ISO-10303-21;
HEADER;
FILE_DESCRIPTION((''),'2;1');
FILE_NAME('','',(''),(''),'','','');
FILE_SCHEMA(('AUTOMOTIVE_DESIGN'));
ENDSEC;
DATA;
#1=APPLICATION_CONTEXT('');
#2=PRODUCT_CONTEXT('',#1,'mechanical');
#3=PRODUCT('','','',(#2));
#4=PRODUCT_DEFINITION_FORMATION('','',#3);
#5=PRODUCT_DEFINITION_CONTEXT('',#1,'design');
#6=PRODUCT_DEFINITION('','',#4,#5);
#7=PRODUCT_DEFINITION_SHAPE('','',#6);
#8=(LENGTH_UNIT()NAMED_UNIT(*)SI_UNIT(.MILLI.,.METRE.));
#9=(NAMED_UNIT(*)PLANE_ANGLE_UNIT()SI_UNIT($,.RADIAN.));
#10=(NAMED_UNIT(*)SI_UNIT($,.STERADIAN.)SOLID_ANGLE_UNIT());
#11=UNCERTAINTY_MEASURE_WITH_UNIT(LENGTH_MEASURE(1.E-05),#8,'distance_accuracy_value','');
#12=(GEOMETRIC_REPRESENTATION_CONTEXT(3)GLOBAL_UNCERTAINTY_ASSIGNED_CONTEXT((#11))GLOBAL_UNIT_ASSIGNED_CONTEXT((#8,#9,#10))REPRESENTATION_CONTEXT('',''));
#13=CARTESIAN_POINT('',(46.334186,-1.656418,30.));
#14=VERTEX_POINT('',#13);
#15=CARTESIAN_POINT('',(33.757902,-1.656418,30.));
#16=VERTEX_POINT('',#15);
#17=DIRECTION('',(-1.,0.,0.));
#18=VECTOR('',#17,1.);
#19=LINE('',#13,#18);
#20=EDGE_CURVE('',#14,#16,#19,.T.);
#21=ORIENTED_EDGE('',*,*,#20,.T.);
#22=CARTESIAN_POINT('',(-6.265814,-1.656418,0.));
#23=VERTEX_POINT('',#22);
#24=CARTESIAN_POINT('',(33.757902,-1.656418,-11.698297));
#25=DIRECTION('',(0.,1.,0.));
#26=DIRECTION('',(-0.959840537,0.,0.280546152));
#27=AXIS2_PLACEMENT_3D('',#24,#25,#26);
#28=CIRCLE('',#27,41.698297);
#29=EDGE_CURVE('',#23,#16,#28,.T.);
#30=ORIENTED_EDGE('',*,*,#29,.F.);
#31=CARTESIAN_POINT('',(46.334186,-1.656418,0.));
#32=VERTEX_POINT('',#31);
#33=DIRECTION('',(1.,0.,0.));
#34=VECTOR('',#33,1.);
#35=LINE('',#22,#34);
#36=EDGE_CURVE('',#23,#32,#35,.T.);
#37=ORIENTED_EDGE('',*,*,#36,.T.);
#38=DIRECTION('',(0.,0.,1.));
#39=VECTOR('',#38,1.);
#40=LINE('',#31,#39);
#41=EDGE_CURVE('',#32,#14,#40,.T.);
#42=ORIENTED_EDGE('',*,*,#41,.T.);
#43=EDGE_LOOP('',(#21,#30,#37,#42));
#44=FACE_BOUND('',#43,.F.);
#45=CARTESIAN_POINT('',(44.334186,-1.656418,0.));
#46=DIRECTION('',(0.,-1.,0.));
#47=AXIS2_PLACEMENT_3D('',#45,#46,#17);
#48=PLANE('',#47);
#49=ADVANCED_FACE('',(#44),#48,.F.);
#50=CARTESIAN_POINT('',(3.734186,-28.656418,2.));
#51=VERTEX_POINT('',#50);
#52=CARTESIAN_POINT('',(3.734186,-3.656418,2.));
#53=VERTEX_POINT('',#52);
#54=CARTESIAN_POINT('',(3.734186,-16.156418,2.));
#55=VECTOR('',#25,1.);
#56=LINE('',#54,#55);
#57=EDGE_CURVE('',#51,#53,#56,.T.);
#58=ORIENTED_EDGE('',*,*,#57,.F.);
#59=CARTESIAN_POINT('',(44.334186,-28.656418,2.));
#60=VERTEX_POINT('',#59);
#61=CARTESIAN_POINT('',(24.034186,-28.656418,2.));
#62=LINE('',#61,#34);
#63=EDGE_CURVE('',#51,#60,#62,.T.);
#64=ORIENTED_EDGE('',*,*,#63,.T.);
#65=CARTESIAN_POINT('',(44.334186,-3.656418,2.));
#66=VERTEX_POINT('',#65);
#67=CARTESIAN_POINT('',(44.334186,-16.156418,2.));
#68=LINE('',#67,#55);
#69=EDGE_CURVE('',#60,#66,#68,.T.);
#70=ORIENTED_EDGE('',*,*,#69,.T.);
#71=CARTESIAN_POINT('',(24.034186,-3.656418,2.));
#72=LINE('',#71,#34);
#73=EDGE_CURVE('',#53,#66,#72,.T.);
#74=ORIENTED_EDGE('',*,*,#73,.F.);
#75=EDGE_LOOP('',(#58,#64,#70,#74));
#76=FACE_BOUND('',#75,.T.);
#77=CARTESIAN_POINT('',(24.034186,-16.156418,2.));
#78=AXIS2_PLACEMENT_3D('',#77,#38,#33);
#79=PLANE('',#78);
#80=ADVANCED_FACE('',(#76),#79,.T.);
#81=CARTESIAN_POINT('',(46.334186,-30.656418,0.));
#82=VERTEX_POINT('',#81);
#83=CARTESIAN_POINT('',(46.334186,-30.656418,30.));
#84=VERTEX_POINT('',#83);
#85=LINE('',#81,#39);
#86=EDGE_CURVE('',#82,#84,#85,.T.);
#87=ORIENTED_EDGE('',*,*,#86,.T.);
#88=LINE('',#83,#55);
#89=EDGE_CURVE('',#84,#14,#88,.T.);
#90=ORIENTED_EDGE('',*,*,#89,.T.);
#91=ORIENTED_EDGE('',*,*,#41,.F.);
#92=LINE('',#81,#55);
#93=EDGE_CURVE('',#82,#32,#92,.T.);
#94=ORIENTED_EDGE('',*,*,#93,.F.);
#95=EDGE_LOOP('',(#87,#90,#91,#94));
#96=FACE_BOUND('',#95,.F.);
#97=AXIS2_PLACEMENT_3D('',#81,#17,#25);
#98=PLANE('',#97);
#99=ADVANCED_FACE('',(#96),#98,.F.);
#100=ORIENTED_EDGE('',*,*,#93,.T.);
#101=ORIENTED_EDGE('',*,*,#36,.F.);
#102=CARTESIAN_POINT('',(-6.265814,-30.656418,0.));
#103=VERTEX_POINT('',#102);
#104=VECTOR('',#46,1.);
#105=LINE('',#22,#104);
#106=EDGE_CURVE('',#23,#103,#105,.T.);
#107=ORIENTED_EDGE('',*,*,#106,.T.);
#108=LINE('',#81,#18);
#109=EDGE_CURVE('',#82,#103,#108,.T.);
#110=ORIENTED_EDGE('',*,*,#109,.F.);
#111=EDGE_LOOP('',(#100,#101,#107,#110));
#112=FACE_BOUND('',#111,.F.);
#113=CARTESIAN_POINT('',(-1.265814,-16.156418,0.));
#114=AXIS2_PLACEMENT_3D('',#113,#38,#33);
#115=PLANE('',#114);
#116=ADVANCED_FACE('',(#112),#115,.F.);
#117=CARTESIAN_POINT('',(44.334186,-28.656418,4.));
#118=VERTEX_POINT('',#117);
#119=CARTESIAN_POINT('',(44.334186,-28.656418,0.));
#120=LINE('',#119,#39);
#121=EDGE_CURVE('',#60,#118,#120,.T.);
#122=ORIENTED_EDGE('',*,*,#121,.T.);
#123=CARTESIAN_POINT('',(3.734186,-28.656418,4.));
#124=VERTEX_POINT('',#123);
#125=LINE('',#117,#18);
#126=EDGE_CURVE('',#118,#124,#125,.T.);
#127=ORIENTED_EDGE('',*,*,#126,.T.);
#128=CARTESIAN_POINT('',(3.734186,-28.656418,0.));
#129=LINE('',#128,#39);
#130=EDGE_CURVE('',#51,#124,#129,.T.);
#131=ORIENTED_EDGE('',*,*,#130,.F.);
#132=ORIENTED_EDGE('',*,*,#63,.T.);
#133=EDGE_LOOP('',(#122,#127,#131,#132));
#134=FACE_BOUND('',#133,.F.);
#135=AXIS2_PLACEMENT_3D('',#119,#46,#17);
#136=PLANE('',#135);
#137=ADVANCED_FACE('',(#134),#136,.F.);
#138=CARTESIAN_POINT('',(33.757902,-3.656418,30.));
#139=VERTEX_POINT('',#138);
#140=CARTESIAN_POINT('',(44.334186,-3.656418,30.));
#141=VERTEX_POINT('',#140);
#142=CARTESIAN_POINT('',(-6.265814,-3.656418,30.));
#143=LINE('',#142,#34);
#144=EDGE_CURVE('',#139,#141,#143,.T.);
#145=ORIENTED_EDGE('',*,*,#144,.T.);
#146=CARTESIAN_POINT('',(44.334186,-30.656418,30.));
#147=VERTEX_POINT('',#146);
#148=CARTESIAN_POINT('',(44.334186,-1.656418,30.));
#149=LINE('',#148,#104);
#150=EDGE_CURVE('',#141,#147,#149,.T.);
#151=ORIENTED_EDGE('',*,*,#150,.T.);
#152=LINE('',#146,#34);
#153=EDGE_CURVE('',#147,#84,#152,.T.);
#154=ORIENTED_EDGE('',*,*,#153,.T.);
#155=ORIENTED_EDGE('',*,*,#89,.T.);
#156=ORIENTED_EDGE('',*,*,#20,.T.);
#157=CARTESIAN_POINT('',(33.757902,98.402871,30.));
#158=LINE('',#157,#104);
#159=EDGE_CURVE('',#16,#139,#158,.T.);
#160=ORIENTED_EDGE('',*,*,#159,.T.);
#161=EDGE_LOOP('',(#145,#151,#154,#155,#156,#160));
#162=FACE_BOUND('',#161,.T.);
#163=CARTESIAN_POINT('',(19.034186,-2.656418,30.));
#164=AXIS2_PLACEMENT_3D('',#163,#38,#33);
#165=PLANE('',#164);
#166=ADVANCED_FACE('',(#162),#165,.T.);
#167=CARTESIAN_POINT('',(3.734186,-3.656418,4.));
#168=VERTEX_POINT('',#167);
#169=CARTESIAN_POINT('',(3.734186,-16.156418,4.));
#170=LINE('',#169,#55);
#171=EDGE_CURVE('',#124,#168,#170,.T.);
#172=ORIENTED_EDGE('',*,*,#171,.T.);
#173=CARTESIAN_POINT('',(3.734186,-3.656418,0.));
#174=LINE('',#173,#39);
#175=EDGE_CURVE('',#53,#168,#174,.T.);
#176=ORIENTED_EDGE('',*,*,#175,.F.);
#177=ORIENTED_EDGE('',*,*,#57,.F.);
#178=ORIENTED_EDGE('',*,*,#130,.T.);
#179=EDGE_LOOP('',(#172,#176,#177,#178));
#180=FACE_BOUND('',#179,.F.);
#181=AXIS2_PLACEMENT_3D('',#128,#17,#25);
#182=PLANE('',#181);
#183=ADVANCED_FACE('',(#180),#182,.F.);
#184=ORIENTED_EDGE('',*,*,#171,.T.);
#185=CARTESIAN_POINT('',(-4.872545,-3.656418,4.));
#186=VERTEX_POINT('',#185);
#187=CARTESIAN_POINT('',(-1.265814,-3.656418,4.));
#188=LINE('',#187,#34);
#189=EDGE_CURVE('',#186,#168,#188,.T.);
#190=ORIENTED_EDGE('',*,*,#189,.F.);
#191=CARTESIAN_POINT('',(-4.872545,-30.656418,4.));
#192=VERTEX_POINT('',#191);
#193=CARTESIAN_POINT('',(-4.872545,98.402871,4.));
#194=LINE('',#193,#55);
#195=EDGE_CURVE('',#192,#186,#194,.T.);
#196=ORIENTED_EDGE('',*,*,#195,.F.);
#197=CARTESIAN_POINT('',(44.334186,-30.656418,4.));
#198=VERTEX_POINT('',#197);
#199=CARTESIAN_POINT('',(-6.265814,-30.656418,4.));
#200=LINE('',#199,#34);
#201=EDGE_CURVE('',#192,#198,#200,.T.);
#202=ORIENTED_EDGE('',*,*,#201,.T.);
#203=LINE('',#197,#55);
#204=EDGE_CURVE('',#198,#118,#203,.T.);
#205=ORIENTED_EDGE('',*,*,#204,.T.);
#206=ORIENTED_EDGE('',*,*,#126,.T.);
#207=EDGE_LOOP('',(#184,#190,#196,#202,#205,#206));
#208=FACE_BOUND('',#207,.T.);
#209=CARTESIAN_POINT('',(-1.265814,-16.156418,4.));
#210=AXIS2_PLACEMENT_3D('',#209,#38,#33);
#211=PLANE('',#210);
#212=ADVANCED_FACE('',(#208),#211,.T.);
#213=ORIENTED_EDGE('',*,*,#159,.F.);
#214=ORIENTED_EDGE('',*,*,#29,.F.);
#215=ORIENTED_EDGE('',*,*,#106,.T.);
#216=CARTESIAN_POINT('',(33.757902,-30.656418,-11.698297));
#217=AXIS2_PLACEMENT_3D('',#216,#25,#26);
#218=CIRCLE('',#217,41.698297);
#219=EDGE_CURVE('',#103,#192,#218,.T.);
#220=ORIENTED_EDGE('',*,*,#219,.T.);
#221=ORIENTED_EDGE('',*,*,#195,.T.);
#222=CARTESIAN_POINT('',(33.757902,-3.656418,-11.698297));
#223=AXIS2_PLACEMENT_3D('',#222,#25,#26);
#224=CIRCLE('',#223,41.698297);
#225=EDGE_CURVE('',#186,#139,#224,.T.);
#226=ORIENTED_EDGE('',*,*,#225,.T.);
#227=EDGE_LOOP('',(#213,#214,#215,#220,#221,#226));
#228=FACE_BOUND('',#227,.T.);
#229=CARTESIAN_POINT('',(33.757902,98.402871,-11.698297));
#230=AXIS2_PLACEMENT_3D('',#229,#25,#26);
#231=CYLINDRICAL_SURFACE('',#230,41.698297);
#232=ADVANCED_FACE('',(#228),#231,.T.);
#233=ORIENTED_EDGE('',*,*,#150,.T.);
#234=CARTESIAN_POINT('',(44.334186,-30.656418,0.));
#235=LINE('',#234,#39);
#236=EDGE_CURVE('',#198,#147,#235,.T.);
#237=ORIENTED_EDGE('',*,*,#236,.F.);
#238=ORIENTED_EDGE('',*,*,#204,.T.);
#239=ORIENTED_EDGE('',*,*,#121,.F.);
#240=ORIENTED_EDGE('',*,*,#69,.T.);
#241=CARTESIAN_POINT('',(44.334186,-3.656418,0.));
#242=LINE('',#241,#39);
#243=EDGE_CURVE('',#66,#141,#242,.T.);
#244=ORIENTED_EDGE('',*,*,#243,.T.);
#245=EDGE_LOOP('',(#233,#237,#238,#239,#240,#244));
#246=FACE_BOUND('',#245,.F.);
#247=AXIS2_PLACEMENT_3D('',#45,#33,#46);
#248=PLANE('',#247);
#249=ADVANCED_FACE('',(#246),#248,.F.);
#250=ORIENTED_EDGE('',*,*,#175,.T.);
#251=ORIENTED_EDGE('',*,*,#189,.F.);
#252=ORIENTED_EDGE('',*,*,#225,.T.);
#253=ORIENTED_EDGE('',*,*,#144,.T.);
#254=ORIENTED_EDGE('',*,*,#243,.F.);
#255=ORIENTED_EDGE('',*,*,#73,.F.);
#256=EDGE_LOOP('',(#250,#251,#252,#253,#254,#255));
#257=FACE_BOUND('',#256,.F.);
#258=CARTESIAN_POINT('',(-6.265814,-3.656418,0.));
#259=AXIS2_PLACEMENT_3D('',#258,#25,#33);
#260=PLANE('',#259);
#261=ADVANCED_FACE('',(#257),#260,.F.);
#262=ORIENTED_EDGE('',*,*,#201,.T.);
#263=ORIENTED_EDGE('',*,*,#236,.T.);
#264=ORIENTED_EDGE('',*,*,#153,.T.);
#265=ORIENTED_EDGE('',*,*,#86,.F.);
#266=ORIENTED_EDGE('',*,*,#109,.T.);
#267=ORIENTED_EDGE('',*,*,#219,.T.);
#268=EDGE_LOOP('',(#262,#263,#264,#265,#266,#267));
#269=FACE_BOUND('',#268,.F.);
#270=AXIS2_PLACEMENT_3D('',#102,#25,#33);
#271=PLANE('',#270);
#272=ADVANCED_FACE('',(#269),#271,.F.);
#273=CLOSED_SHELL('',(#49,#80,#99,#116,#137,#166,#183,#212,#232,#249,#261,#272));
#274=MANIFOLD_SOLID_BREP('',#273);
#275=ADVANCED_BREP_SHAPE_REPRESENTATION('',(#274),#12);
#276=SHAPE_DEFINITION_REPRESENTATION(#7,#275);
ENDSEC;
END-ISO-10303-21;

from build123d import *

# Parameters (mm, degrees)
F0_W        = 40.6
F0_H        = 25
F1_DEPTH    = 2
F2_DEPTH    = 30
F3_DEPTH    = 4
F4_DEPTH    = 30
F0_W_2      = 10
F5_DEPTH    = 4
F6_T1_DEPTH = 202.1185772835


# Not quite as in the source:
# - a fillet or chamfer that OpenCascade refuses, or shapes differently, is made with other operations: its cross-section is extruded or revolved along the edge and cut away or added


with BuildPart() as f1:
    # F0 (on Top) → F1 (new body)
    with BuildSketch(Plane.XY):
        with Locations((24.0341860496, -16.1564178318)):
            Rectangle(F0_W, F0_H)
    extrude(amount=F1_DEPTH)

    # F0 (on Top) → F2 (join)
    with BuildSketch(Plane.XY):
        Polygon((44.3341860496, -1.6564178318), (44.3341860496, -3.6564178318), (44.3341860496, -28.6564178318), (44.3341860496, -30.6564178318), (46.3341860496, -30.6564178318), (46.3341860496, -1.6564178318), align=None)
    extrude(amount=F2_DEPTH)

    # F0 (on Top) → F3 (join)
    with BuildSketch(Plane.XY):
        Polygon((44.3341860496, -28.6564178318), (3.7341860496, -28.6564178318), (-6.2658139504, -28.6564178318), (-6.2658139504, -30.6564178318), (44.3341860496, -30.6564178318), align=None)
    extrude(amount=F3_DEPTH)

    # F0 (on Top) → F4 (join)
    with BuildSketch(Plane.XY):
        Polygon((-6.2658139504, -3.6564178318), (3.7341860496, -3.6564178318), (44.3341860496, -3.6564178318), (44.3341860496, -1.6564178318), (-6.2658139504, -1.6564178318), align=None)
    extrude(amount=F4_DEPTH)

    # F0 (on Top) → F5 (join)
    with BuildSketch(Plane.XY):
        with Locations((-1.2658139504, -16.1564178318)):
            Rectangle(F0_W_2, F0_H)
    extrude(amount=F5_DEPTH)

    # F6: fillet of radius 41.6982966493 on 1 edges, made by hand

    # F6_s2 → F6_t1 (cut)
    with BuildSketch(Plane.XZ.offset(-98.40287081)):
        with BuildLine():
            ThreePointArc((-6.2658139504, 0), (8.7484143116, 21.6674566572), (33.7579015062, 30))
            Line((33.7579015062, 30), (-6.2658139504, 30))
            Line((-6.2658139504, 30), (-6.2658139504, 0))
        make_face()
    extrude(amount=F6_T1_DEPTH, mode=Mode.SUBTRACT)


solid = f1.part
